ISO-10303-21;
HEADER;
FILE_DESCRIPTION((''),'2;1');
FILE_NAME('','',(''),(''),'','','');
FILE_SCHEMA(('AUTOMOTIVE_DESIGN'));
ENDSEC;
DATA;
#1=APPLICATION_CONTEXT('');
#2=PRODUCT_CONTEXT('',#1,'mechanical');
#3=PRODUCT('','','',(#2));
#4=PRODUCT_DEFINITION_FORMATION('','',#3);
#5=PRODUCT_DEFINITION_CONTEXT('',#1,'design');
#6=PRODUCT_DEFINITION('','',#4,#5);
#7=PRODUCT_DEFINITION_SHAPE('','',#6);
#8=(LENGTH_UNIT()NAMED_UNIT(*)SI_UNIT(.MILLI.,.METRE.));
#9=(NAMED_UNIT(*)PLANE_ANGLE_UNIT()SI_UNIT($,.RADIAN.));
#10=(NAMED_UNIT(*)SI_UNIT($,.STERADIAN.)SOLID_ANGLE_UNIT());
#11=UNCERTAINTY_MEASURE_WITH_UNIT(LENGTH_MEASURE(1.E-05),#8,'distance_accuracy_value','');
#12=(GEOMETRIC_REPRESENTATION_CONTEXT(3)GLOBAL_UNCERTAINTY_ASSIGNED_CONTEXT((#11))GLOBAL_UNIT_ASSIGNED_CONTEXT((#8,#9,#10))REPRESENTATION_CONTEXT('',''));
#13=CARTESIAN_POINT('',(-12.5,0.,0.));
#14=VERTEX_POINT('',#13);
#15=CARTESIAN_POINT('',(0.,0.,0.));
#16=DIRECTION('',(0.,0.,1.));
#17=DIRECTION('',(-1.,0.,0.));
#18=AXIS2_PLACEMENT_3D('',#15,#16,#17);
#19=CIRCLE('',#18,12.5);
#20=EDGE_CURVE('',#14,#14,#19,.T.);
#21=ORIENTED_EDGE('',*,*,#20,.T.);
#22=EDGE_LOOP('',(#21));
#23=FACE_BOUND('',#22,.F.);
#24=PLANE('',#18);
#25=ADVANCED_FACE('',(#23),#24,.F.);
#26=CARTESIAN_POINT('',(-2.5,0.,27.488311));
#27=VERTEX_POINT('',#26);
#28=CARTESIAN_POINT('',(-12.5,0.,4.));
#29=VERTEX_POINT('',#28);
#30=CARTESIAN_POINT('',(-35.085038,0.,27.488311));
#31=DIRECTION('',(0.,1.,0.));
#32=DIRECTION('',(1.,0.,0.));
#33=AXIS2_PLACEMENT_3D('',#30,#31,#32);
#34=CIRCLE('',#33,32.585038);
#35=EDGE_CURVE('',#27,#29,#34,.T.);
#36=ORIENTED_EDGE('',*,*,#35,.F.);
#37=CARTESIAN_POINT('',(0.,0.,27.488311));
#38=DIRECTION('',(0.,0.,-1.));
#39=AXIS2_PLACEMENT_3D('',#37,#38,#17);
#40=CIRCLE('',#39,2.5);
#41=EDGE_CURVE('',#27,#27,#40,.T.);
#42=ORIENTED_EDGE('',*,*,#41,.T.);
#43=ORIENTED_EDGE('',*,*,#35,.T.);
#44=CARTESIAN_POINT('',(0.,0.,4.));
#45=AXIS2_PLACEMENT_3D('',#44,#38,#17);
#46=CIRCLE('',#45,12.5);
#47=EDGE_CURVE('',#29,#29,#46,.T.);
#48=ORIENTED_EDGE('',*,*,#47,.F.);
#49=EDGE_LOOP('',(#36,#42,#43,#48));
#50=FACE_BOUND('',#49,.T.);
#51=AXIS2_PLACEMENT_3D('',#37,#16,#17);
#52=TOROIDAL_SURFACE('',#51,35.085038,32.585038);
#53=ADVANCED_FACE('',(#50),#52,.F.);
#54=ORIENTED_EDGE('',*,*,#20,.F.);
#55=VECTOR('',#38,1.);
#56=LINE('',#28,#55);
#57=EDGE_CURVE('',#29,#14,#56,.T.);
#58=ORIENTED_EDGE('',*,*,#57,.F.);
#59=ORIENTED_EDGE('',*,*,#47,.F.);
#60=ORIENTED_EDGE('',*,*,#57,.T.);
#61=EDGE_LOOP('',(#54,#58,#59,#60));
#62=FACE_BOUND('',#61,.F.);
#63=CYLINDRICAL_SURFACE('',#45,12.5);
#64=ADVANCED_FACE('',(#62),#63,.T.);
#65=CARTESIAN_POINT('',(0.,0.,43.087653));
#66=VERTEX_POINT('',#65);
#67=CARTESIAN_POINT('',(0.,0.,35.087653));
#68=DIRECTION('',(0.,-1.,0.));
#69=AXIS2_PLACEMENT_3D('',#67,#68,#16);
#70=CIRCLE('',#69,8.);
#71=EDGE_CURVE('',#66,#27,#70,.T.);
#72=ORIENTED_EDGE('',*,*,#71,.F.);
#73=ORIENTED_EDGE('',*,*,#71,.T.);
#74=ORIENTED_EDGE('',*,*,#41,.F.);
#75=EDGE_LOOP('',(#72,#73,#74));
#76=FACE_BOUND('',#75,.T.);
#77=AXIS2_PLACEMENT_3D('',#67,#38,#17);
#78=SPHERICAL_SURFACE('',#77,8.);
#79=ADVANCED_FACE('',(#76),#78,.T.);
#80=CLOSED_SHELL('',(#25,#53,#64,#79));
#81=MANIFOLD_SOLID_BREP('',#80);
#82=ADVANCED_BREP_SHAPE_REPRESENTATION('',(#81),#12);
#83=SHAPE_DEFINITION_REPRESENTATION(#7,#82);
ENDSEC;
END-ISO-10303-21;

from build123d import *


# Not quite as in the source:
# - a feature of the source that left no trace in its solid (it failed there, or was rolled back) is left out


with BuildPart() as f1:
    # F0 (on Front) → F1 (revolve)
    with BuildSketch(Plane.XZ):
        with BuildLine():
            ThreePointArc((-2.5, 27.4883110198), (-1.2659509046, 27.1884526113), (0, 27.0876530966))
            Line((0, 27.0876530966), (0, 43.0876530966))
            ThreePointArc((0, 43.0876530966), (-7.8992004853, 36.3536040012), (-2.5, 27.4883110198))
        make_face()
    revolve(axis=Axis((0, 0, 35.0876530966), (0, 0, -1)))

    # F0 (on Front) → F2 (revolve)
    with BuildSketch(Plane.XZ):
        with BuildLine():
            ThreePointArc((-2.5, 27.4883110198), (-5.1040521689, 14.7240958602), (-12.5, 4))
            Line((-12.5, 4), (-2.5, 4))
            Line((-2.5, 4), (-2.5, 27.4883110198))
        make_face()
        with BuildLine():
            Line((-2.5, 4), (0, 4))
            Line((0, 4), (0, 27.0876530966))
            ThreePointArc((0, 27.0876530966), (-1.2659509046, 27.1884526113), (-2.5, 27.4883110198))
            Line((-2.5, 27.4883110198), (-2.5, 4))
        make_face()
    revolve(axis=Axis((0, 0, 15.5438265483), (0, 0, -1)))

    # F0 (on Front) → F3 (revolve)
    with BuildSketch(Plane.XZ):
        Polygon((-12.5, 0), (0, 0), (0, 4), (-2.5, 4), (-12.5, 4), align=None)
        with BuildLine():
            Line((-2.5, 4), (0, 4))
            Line((0, 4), (0, 27.0876530966))
            ThreePointArc((0, 27.0876530966), (-1.2659509046, 27.1884526113), (-2.5, 27.4883110198))
            Line((-2.5, 27.4883110198), (-2.5, 4))
        make_face()
    revolve(axis=Axis((0, 0, 2), (0, 0, 1)))


solid = f1.part
